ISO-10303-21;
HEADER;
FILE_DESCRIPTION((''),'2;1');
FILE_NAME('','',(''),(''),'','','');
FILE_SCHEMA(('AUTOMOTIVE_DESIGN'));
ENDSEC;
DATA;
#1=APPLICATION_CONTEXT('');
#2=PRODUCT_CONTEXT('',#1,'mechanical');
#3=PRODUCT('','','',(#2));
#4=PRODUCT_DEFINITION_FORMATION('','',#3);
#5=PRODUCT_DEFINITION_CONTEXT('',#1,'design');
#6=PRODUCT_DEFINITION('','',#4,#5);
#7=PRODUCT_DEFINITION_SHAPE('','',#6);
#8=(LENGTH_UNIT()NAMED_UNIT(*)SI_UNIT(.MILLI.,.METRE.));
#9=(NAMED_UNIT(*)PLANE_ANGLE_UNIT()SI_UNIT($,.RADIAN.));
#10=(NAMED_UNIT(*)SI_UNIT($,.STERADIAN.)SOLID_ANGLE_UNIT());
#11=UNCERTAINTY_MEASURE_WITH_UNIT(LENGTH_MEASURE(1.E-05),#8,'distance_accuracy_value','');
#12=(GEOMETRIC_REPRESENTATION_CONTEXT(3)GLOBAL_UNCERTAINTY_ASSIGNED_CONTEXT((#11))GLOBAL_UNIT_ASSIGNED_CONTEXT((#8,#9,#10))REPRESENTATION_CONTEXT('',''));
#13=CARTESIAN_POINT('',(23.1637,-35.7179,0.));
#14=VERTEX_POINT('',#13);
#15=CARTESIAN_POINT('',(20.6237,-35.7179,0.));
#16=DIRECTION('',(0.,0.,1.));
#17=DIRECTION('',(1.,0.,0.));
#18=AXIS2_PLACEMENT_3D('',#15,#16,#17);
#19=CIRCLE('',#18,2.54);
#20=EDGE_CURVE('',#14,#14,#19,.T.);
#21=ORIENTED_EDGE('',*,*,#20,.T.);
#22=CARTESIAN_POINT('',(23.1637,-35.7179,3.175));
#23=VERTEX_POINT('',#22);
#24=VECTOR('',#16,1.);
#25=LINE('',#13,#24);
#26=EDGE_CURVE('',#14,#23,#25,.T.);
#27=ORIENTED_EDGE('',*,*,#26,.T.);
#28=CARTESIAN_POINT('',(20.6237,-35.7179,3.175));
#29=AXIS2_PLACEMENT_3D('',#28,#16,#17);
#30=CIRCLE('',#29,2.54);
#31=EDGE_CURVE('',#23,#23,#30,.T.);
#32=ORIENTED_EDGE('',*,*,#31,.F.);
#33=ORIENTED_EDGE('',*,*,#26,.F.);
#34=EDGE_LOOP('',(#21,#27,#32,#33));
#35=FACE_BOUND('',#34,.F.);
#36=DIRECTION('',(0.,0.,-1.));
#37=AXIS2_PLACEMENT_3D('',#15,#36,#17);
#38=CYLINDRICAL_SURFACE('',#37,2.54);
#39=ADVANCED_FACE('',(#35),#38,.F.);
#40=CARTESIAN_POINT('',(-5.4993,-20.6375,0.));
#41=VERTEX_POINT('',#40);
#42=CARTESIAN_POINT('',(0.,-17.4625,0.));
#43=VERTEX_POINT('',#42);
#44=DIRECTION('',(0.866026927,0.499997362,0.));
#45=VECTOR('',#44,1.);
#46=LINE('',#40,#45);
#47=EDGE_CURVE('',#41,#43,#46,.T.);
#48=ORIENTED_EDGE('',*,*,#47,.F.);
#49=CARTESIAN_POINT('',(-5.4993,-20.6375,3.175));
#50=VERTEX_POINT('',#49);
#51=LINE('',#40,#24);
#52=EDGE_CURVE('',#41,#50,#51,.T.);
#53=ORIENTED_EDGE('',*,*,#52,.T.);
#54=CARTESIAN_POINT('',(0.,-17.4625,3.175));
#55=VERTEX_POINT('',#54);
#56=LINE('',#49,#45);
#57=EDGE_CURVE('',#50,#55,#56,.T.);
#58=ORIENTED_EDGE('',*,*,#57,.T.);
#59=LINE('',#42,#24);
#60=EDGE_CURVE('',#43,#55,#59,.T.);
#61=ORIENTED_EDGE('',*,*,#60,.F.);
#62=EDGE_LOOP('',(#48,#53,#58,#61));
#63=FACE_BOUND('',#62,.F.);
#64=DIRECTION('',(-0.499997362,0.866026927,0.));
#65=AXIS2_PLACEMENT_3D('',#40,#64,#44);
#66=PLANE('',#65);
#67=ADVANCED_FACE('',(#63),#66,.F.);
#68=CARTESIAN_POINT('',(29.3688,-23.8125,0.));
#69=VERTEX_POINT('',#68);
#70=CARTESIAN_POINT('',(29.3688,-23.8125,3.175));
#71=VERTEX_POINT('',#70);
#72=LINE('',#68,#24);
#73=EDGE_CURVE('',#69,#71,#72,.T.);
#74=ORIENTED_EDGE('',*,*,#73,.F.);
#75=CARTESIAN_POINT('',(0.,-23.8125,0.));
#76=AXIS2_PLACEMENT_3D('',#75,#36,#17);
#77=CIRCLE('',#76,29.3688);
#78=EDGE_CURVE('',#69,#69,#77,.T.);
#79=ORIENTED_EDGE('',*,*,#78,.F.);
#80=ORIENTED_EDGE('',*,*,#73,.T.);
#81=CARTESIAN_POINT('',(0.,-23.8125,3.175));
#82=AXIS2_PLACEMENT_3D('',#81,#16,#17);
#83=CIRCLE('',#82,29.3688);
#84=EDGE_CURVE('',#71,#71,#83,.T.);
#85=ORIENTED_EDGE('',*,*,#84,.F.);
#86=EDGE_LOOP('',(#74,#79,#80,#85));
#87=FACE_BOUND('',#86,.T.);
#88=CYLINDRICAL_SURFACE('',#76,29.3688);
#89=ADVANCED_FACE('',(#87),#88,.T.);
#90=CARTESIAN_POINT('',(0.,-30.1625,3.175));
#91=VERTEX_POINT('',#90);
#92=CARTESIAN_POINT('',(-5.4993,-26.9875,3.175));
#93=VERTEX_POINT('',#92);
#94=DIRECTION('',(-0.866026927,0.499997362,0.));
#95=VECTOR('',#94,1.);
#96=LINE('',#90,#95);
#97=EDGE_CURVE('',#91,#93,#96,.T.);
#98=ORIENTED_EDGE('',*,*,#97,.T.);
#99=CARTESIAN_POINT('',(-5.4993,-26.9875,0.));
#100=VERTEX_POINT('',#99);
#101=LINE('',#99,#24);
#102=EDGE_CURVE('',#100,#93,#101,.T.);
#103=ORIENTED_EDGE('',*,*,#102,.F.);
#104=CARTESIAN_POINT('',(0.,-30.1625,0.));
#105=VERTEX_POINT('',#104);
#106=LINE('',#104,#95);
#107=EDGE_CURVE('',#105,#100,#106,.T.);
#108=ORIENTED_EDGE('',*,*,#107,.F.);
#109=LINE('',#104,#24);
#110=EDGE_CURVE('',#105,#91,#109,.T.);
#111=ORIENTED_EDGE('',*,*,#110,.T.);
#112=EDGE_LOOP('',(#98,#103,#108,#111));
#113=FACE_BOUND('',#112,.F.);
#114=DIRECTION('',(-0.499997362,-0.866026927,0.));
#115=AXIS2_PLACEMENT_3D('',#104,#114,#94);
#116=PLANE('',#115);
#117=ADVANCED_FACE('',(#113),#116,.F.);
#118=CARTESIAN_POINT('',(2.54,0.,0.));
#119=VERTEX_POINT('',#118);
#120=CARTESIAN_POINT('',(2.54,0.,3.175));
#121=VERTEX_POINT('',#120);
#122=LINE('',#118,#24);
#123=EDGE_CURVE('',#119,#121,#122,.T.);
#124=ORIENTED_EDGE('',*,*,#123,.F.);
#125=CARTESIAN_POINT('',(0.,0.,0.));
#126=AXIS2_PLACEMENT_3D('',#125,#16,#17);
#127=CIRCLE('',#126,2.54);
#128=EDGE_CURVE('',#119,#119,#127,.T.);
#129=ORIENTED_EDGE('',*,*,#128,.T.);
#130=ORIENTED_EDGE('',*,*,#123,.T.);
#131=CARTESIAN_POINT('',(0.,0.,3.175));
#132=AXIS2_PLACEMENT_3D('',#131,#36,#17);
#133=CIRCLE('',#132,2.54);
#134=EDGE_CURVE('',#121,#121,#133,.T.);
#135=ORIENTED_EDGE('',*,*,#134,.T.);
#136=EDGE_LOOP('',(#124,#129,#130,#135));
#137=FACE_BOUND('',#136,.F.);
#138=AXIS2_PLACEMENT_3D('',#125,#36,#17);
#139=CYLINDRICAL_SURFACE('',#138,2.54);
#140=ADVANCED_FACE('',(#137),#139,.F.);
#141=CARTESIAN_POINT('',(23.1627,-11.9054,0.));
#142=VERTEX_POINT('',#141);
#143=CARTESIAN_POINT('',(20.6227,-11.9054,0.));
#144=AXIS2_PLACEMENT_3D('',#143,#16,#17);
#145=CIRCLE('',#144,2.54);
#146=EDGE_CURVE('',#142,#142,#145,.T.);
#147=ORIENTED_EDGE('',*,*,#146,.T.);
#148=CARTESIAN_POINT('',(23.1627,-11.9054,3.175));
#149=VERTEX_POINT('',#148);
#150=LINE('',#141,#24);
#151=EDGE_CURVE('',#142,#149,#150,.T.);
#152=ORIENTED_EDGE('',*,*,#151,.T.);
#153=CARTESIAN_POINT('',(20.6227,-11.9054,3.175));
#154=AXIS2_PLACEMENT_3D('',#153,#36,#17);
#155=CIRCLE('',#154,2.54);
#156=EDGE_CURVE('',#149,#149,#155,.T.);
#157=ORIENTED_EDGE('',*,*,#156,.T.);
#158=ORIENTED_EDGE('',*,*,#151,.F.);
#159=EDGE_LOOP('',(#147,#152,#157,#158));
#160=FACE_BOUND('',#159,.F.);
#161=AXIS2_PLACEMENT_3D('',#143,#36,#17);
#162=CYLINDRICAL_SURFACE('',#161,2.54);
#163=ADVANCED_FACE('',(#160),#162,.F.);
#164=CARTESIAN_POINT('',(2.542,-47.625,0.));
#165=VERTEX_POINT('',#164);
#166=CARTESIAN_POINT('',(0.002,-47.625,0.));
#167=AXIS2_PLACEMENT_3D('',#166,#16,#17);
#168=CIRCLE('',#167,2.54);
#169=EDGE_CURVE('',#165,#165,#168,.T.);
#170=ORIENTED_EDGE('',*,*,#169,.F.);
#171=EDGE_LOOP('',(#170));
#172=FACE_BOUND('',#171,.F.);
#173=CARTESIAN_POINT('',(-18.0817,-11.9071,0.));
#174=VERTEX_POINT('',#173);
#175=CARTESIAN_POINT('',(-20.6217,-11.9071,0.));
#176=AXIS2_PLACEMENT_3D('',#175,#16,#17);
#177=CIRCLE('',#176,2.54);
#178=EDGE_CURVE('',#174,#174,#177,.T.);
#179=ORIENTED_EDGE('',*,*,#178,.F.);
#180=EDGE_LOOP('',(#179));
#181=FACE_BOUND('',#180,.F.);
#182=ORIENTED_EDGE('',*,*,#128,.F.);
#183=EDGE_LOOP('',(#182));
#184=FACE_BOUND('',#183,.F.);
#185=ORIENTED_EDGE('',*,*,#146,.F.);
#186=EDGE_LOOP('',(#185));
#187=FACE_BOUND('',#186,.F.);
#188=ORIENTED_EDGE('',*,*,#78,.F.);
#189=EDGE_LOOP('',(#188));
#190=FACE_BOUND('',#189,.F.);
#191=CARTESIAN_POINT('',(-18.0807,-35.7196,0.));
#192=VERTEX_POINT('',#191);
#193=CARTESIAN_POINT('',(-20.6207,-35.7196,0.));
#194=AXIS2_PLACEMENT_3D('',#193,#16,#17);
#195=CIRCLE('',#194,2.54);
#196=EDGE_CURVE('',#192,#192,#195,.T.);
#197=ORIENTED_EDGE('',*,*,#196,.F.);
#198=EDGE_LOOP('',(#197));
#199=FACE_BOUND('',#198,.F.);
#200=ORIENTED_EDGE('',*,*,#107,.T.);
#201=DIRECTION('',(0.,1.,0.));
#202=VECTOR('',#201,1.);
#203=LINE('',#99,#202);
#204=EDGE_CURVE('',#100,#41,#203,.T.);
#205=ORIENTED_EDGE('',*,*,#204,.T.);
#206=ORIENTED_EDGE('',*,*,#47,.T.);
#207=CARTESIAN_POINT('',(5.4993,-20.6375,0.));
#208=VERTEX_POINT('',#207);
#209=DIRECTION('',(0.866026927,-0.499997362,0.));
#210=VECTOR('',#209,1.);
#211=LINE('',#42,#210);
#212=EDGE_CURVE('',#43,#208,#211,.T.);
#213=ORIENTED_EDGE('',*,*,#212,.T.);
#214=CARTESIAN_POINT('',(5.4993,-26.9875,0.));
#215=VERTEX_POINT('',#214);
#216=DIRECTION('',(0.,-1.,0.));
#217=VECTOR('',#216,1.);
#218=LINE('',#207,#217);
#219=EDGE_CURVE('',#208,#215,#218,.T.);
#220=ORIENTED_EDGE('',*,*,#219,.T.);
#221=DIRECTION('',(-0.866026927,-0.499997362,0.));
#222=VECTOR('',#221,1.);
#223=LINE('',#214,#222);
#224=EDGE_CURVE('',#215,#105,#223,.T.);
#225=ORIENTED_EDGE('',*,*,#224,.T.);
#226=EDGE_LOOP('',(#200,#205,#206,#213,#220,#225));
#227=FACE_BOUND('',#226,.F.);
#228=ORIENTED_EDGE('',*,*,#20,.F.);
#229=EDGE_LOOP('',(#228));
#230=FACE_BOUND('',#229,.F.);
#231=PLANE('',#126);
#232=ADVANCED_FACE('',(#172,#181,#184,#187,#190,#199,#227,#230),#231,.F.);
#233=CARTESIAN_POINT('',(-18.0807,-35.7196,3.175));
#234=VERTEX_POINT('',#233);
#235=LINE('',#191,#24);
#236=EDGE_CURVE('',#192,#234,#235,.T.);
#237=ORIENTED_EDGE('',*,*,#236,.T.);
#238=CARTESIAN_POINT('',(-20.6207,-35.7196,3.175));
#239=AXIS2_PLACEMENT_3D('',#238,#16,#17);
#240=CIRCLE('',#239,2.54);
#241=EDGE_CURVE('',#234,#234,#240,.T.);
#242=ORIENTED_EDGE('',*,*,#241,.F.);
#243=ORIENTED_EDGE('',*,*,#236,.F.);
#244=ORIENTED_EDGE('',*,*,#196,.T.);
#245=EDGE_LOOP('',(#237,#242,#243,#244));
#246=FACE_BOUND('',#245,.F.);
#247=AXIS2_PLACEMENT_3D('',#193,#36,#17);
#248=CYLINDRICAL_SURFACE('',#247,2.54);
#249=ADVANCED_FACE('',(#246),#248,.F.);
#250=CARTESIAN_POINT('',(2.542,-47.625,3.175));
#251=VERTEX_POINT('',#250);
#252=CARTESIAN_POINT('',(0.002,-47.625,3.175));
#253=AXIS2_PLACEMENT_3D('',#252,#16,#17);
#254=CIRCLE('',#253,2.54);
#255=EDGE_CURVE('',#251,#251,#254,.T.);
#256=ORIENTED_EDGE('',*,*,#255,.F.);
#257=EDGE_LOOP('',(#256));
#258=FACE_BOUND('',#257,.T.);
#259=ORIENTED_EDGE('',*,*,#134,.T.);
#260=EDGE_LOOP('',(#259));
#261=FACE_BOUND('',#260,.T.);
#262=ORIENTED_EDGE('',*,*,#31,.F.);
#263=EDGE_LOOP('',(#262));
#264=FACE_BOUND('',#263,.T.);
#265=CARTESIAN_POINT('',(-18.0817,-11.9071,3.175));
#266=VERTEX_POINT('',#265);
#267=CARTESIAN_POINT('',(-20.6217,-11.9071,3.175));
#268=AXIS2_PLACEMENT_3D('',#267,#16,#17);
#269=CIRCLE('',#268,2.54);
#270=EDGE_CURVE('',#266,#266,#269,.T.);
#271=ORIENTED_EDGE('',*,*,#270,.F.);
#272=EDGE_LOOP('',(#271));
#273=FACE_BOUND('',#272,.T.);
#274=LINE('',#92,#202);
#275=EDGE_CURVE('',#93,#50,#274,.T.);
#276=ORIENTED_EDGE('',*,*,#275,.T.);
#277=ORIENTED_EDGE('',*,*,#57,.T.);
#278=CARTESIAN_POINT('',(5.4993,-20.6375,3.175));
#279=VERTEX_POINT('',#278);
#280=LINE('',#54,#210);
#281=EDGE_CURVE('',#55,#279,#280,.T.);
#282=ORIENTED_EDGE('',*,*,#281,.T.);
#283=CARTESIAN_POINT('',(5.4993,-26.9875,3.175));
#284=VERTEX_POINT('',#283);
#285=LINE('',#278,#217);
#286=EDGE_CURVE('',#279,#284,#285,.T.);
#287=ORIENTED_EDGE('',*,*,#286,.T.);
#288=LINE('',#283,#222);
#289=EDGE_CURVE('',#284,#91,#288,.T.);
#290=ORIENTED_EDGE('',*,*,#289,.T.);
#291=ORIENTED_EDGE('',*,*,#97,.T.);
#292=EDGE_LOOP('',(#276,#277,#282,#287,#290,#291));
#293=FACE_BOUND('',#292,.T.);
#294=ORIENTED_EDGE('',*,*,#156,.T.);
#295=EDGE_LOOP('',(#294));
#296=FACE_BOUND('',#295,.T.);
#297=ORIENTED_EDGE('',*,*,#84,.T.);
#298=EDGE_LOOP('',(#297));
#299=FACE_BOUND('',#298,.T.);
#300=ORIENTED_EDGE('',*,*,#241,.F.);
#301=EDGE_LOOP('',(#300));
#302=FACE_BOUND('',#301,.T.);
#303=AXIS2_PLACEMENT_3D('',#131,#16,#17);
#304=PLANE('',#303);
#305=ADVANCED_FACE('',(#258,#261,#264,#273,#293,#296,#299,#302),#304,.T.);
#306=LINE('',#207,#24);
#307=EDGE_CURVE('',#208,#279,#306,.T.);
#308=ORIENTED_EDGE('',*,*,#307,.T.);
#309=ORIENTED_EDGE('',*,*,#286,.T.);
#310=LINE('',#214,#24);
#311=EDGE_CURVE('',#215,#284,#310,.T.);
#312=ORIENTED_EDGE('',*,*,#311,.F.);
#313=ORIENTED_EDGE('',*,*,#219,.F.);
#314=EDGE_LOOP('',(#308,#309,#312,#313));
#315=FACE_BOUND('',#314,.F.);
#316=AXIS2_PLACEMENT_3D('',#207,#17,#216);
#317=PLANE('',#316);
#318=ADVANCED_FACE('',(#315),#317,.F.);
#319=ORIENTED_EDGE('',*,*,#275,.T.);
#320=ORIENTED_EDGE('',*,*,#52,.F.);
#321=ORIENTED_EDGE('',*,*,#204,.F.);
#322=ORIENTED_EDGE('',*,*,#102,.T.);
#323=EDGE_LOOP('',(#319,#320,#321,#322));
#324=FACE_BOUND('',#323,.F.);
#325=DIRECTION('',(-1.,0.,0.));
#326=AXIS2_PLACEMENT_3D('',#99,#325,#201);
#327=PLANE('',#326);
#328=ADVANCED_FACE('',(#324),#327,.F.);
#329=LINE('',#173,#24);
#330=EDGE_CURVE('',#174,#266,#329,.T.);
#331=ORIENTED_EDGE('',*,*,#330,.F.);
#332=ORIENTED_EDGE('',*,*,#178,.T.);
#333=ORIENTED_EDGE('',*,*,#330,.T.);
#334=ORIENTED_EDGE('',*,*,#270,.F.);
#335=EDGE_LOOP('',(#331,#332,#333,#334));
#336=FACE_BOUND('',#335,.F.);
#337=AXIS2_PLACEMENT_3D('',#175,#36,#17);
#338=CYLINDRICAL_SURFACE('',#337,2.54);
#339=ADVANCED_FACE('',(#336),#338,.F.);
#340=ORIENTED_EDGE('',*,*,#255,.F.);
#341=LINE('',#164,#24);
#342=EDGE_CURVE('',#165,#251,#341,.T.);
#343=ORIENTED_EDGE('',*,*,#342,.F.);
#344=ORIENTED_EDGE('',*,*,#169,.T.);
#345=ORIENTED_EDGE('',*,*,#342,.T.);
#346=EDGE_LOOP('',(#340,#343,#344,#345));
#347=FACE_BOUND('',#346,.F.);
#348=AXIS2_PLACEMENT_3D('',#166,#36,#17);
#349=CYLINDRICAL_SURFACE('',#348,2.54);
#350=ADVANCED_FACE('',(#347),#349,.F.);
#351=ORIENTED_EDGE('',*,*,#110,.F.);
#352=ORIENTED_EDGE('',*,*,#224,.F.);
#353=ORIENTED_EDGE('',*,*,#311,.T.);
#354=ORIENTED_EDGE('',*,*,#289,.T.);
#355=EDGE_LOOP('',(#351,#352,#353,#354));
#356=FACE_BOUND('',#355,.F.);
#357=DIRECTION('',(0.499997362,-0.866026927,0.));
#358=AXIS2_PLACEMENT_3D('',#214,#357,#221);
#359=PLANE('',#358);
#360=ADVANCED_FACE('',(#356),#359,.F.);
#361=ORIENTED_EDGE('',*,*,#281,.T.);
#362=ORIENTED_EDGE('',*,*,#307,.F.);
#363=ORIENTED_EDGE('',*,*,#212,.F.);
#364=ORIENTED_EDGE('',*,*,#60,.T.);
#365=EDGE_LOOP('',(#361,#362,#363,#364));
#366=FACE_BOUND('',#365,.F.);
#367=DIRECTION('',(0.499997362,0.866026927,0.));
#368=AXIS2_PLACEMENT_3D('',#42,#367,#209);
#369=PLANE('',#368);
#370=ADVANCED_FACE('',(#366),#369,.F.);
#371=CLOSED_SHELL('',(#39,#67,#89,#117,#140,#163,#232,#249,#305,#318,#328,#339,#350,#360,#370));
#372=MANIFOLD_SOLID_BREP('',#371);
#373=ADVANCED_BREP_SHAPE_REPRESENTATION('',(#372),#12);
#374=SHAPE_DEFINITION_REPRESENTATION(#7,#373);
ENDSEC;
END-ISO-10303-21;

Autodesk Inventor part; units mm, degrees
ref_plane "YZ Plane" through (0, 0, 0) normal (1, 0, 0) x (0, 1, 0)
ref_plane "XZ Plane" through (0, 0, 0) normal (0, 1, 0) x (-1, 0, 0)
ref_plane "XY Plane" through (0, 0, 0) normal (0, 0, 1) x (1, 0, 0)
sketch "Sketch1" plane through (0, 0, 0) normal (0, 0, 1) x (1, 0, 0)
  arc A0 (24.3719, -16.0061) -> (18.9457, -6.6082) centre (20.6227, -11.9054) ccw
  arc A1 (18.9457, -6.6082) -> (15.375, -3.3543) centre (0, -23.8125) ccw
  arc A2 (15.4859, -6.1082) -> (15.375, -3.3543) centre (14.3062, -4.7765) ccw
  arc A3 (15.4859, -6.1082) -> (13.3187, -9.3259) centre (20.6222, -11.9062) ccw
  arc A4 (10.5541, -10.1415) -> (13.3187, -9.3259) centre (11.6413, -8.7333) ccw
  arc A5 (10.5541, -10.1415) -> (6.5626, -7.8369) centre (0, -23.8125) ccw
  arc A6 (5.8865, -5.0351) -> (6.5626, -7.8369) centre (7.2386, -6.1913) ccw
  arc A7 (5.8865, -5.0351) -> (7.5891, -1.5492) centre (-0.0005, -0.0009) ccw
  arc A8 (10.0295, -0.2681) -> (7.5891, -1.5492) centre (9.3323, -1.9049) ccw
  arc A9 (10.0295, -0.2681) -> (5.4257, 1.1973) centre (0, -23.8125) ccw
  arc A10 (5.4257, 1.1973) -> (-5.4257, 1.1973) centre (0, 0) ccw
  arc A11 (-5.4257, 1.1973) -> (-10.0298, -0.2683) centre (0, -23.8125) ccw
  arc A12 (-7.5894, -1.5492) -> (-10.0298, -0.2683) centre (-9.3326, -1.905) ccw
  arc A13 (-7.5894, -1.5492) -> (-5.8864, -5.0349) centre (0, 0) ccw
  arc A14 (-6.5624, -7.8369) -> (-5.8864, -5.0349) centre (-7.2384, -6.1912) ccw
  arc A15 (-6.5624, -7.8369) -> (-10.554, -10.1414) centre (0, -23.8125) ccw
  arc A16 (-13.3185, -9.326) -> (-10.554, -10.1414) centre (-11.6411, -8.7331) ccw
  arc A17 (-13.3185, -9.326) -> (-15.486, -6.1085) centre (-20.6217, -11.9071) ccw
  arc A18 (-15.3753, -3.3545) -> (-15.486, -6.1085) centre (-14.3064, -4.7767) ccw
  arc A19 (-15.3753, -3.3545) -> (-18.9467, -6.6093) centre (0, -23.8125) ccw
  arc A20 (-18.9467, -6.6093) -> (-24.3721, -16.0067) centre (-20.6217, -11.9071) ccw
  arc A21 (-24.3721, -16.0067) -> (-25.4048, -20.7264) centre (0, -23.8125) ccw
  arc A22 (-23.0753, -19.2535) -> (-25.4048, -20.7264) centre (-23.6387, -20.941) ccw
  arc A23 (-23.0753, -19.2535) -> (-19.2051, -19.5215) centre (-20.6222, -11.9063) ccw
  arc A24 (-17.1165, -21.5079) -> (-19.2051, -19.5215) centre (-18.8796, -21.2705) ccw
  arc A25 (-17.1165, -21.5079) -> (-17.1165, -26.1169) centre (0, -23.8125) ccw
  arc A26 (-19.2049, -28.1034) -> (-17.1165, -26.1169) centre (-18.8797, -26.3543) ccw
  arc A27 (-19.2049, -28.1034) -> (-23.0751, -28.3718) centre (-20.6212, -35.7187) ccw
  arc A28 (-25.4048, -26.8989) -> (-23.0751, -28.3718) centre (-23.6387, -26.6843) ccw
  arc A29 (-25.4048, -26.8989) -> (-24.3714, -31.6203) centre (0, -23.8125) ccw
  arc A30 (-24.3714, -31.6203) -> (-18.9453, -41.0172) centre (-20.6207, -35.7196) ccw
  arc A31 (-18.9453, -41.0172) -> (-15.375, -44.2707) centre (0, -23.8125) ccw
  arc A32 (-15.4859, -41.5168) -> (-15.375, -44.2707) centre (-14.3062, -42.8485) ccw
  arc A33 (-15.4859, -41.5168) -> (-13.3187, -38.2991) centre (-20.6222, -35.7188) ccw
  arc A34 (-10.5541, -37.4835) -> (-13.3187, -38.2991) centre (-11.6413, -38.8917) ccw
  arc A35 (-10.5541, -37.4835) -> (-6.5626, -39.7881) centre (0, -23.8125) ccw
  arc A36 (-5.8865, -42.5899) -> (-6.5626, -39.7881) centre (-7.2386, -41.4337) ccw
  arc A37 (-5.8865, -42.5899) -> (-7.5891, -46.0758) centre (0.0005, -47.6241) ccw
  arc A38 (-10.0295, -47.3569) -> (-7.5891, -46.0758) centre (-9.3323, -45.7201) ccw
  arc A39 (-10.0295, -47.3569) -> (-5.4236, -48.8227) centre (0, -23.8125) ccw
  arc A40 (-5.4236, -48.8227) -> (5.4278, -48.8218) centre (0.002, -47.625) ccw
  arc A41 (5.4278, -48.8218) -> (10.0298, -47.3567) centre (0, -23.8125) ccw
  arc A42 (7.5894, -46.0758) -> (10.0298, -47.3567) centre (9.3326, -45.72) ccw
  arc A43 (7.5894, -46.0758) -> (5.8864, -42.5901) centre (0, -47.625) ccw
  arc A44 (6.5624, -39.7881) -> (5.8864, -42.5901) centre (7.2384, -41.4338) ccw
  arc A45 (6.5624, -39.7881) -> (10.554, -37.4836) centre (0, -23.8125) ccw
  arc A46 (13.3185, -38.299) -> (10.554, -37.4836) centre (11.6411, -38.8919) ccw
  arc A47 (13.3185, -38.299) -> (15.486, -41.5165) centre (20.6217, -35.7179) ccw
  arc A48 (15.3753, -44.2705) -> (15.486, -41.5165) centre (14.3064, -42.8483) ccw
  arc A49 (15.3753, -44.2705) -> (18.9472, -41.0152) centre (0, -23.8125) ccw
  arc A50 (18.9472, -41.0152) -> (24.3725, -31.6169) centre (20.6237, -35.7179) ccw
  arc A51 (24.3725, -31.6169) -> (25.4048, -26.8986) centre (0, -23.8125) ccw
  arc A52 (23.0753, -28.3715) -> (25.4048, -26.8986) centre (23.6387, -26.684) ccw
  arc A53 (23.0753, -28.3715) -> (19.2051, -28.1035) centre (20.6222, -35.7187) ccw
  arc A54 (17.1165, -26.1171) -> (19.2051, -28.1035) centre (18.8796, -26.3545) ccw
  arc A55 (17.1165, -26.1171) -> (17.1165, -21.5081) centre (0, -23.8125) ccw
  arc A56 (19.2049, -19.5216) -> (17.1165, -21.5081) centre (18.8797, -21.2707) ccw
  arc A57 (19.2049, -19.5216) -> (23.0751, -19.2532) centre (20.6212, -11.9063) ccw
  arc A58 (25.4048, -20.7261) -> (23.0751, -19.2532) centre (23.6387, -20.9407) ccw
  arc A59 (25.4048, -20.7261) -> (24.3719, -16.0061) centre (0, -23.8125) ccw
  circle A60 centre (20.6227, -11.9054) radius 2.54
  circle A61 centre (20.6237, -35.7179) radius 2.54
  circle A62 centre (0.002, -47.625) radius 2.54
  circle A63 centre (-20.6207, -35.7196) radius 2.54
  circle A64 centre (-20.6217, -11.9071) radius 2.54
  circle A65 centre (0, 0) radius 2.54
  circle A66 centre (0, -23.8125) radius 14.2875
  circle A67 centre (0, -23.8125) radius 29.3688
  circle A68 centre (0, -23.8125) radius 6.35
  line L0 (0, 0) -> (0, -17.4625)
  line L1 (20.6227, -11.9054) -> (5.4278, -20.5169)
  line L2 (0, -17.4625) -> (5.4993, -20.6375)
  line L3 (5.4993, -20.6375) -> (5.4993, -26.9875)
  line L4 (5.4993, -26.9875) -> (0, -30.1625)
  line L5 (0, -30.1625) -> (-5.4993, -26.9875)
  line L6 (-5.4993, -26.9875) -> (-5.4993, -20.6375)
  line L7 (-5.4993, -20.6375) -> (0, -17.4625)
  dimension "d0" = 12.7
extrude "Extrusion1" add sketch "Sketch1" along normal blind 3.175 contours A59 A58 A57 A56 A55 A54 A53 A52 A51 A50 A49 A48 A47 A46 A45 A44 A43 A42 A41 A40 A39 A38 A37 A36 A35 A34 A33 A32 A31 A30 A29 A28 A27 A26 A25 A24 A23 A22 A21 A20 A19 A18 A17 A16 A15 A14 A13 A12 A11 A10 A9 A8 A7 A6 A5 A4 A3 A2 A1 A0 | A0 A67 A50 A51 A52 A53 A54 A55 A56 A57 A58 A59 | A0 A1 A2 A3 A4 A5 A6 A7 A8 A9 A10 A67 | A10 A11 A12 A13 A14 A15 A16 A17 A18 A19 A20 A67 | A67 A40 A41 A42 A43 A44 A45 A46 A47 A48 A49 A50 | A20 A21 A22 A23 A24 A25 A26 A27 A28 A29 A30 A67 | A67 A30 A31 A32 A33 A34 A35 A36 A37 A38 A39 A40 | A66 L0 A68 L1 | L1 A68 L0 A66 | A68 L2 | L7 A68 | A68 L3 | L6 A68 | A68 L4 | L5 A68
properties part number "wheelhubthing" material "Aluminum 6061"
